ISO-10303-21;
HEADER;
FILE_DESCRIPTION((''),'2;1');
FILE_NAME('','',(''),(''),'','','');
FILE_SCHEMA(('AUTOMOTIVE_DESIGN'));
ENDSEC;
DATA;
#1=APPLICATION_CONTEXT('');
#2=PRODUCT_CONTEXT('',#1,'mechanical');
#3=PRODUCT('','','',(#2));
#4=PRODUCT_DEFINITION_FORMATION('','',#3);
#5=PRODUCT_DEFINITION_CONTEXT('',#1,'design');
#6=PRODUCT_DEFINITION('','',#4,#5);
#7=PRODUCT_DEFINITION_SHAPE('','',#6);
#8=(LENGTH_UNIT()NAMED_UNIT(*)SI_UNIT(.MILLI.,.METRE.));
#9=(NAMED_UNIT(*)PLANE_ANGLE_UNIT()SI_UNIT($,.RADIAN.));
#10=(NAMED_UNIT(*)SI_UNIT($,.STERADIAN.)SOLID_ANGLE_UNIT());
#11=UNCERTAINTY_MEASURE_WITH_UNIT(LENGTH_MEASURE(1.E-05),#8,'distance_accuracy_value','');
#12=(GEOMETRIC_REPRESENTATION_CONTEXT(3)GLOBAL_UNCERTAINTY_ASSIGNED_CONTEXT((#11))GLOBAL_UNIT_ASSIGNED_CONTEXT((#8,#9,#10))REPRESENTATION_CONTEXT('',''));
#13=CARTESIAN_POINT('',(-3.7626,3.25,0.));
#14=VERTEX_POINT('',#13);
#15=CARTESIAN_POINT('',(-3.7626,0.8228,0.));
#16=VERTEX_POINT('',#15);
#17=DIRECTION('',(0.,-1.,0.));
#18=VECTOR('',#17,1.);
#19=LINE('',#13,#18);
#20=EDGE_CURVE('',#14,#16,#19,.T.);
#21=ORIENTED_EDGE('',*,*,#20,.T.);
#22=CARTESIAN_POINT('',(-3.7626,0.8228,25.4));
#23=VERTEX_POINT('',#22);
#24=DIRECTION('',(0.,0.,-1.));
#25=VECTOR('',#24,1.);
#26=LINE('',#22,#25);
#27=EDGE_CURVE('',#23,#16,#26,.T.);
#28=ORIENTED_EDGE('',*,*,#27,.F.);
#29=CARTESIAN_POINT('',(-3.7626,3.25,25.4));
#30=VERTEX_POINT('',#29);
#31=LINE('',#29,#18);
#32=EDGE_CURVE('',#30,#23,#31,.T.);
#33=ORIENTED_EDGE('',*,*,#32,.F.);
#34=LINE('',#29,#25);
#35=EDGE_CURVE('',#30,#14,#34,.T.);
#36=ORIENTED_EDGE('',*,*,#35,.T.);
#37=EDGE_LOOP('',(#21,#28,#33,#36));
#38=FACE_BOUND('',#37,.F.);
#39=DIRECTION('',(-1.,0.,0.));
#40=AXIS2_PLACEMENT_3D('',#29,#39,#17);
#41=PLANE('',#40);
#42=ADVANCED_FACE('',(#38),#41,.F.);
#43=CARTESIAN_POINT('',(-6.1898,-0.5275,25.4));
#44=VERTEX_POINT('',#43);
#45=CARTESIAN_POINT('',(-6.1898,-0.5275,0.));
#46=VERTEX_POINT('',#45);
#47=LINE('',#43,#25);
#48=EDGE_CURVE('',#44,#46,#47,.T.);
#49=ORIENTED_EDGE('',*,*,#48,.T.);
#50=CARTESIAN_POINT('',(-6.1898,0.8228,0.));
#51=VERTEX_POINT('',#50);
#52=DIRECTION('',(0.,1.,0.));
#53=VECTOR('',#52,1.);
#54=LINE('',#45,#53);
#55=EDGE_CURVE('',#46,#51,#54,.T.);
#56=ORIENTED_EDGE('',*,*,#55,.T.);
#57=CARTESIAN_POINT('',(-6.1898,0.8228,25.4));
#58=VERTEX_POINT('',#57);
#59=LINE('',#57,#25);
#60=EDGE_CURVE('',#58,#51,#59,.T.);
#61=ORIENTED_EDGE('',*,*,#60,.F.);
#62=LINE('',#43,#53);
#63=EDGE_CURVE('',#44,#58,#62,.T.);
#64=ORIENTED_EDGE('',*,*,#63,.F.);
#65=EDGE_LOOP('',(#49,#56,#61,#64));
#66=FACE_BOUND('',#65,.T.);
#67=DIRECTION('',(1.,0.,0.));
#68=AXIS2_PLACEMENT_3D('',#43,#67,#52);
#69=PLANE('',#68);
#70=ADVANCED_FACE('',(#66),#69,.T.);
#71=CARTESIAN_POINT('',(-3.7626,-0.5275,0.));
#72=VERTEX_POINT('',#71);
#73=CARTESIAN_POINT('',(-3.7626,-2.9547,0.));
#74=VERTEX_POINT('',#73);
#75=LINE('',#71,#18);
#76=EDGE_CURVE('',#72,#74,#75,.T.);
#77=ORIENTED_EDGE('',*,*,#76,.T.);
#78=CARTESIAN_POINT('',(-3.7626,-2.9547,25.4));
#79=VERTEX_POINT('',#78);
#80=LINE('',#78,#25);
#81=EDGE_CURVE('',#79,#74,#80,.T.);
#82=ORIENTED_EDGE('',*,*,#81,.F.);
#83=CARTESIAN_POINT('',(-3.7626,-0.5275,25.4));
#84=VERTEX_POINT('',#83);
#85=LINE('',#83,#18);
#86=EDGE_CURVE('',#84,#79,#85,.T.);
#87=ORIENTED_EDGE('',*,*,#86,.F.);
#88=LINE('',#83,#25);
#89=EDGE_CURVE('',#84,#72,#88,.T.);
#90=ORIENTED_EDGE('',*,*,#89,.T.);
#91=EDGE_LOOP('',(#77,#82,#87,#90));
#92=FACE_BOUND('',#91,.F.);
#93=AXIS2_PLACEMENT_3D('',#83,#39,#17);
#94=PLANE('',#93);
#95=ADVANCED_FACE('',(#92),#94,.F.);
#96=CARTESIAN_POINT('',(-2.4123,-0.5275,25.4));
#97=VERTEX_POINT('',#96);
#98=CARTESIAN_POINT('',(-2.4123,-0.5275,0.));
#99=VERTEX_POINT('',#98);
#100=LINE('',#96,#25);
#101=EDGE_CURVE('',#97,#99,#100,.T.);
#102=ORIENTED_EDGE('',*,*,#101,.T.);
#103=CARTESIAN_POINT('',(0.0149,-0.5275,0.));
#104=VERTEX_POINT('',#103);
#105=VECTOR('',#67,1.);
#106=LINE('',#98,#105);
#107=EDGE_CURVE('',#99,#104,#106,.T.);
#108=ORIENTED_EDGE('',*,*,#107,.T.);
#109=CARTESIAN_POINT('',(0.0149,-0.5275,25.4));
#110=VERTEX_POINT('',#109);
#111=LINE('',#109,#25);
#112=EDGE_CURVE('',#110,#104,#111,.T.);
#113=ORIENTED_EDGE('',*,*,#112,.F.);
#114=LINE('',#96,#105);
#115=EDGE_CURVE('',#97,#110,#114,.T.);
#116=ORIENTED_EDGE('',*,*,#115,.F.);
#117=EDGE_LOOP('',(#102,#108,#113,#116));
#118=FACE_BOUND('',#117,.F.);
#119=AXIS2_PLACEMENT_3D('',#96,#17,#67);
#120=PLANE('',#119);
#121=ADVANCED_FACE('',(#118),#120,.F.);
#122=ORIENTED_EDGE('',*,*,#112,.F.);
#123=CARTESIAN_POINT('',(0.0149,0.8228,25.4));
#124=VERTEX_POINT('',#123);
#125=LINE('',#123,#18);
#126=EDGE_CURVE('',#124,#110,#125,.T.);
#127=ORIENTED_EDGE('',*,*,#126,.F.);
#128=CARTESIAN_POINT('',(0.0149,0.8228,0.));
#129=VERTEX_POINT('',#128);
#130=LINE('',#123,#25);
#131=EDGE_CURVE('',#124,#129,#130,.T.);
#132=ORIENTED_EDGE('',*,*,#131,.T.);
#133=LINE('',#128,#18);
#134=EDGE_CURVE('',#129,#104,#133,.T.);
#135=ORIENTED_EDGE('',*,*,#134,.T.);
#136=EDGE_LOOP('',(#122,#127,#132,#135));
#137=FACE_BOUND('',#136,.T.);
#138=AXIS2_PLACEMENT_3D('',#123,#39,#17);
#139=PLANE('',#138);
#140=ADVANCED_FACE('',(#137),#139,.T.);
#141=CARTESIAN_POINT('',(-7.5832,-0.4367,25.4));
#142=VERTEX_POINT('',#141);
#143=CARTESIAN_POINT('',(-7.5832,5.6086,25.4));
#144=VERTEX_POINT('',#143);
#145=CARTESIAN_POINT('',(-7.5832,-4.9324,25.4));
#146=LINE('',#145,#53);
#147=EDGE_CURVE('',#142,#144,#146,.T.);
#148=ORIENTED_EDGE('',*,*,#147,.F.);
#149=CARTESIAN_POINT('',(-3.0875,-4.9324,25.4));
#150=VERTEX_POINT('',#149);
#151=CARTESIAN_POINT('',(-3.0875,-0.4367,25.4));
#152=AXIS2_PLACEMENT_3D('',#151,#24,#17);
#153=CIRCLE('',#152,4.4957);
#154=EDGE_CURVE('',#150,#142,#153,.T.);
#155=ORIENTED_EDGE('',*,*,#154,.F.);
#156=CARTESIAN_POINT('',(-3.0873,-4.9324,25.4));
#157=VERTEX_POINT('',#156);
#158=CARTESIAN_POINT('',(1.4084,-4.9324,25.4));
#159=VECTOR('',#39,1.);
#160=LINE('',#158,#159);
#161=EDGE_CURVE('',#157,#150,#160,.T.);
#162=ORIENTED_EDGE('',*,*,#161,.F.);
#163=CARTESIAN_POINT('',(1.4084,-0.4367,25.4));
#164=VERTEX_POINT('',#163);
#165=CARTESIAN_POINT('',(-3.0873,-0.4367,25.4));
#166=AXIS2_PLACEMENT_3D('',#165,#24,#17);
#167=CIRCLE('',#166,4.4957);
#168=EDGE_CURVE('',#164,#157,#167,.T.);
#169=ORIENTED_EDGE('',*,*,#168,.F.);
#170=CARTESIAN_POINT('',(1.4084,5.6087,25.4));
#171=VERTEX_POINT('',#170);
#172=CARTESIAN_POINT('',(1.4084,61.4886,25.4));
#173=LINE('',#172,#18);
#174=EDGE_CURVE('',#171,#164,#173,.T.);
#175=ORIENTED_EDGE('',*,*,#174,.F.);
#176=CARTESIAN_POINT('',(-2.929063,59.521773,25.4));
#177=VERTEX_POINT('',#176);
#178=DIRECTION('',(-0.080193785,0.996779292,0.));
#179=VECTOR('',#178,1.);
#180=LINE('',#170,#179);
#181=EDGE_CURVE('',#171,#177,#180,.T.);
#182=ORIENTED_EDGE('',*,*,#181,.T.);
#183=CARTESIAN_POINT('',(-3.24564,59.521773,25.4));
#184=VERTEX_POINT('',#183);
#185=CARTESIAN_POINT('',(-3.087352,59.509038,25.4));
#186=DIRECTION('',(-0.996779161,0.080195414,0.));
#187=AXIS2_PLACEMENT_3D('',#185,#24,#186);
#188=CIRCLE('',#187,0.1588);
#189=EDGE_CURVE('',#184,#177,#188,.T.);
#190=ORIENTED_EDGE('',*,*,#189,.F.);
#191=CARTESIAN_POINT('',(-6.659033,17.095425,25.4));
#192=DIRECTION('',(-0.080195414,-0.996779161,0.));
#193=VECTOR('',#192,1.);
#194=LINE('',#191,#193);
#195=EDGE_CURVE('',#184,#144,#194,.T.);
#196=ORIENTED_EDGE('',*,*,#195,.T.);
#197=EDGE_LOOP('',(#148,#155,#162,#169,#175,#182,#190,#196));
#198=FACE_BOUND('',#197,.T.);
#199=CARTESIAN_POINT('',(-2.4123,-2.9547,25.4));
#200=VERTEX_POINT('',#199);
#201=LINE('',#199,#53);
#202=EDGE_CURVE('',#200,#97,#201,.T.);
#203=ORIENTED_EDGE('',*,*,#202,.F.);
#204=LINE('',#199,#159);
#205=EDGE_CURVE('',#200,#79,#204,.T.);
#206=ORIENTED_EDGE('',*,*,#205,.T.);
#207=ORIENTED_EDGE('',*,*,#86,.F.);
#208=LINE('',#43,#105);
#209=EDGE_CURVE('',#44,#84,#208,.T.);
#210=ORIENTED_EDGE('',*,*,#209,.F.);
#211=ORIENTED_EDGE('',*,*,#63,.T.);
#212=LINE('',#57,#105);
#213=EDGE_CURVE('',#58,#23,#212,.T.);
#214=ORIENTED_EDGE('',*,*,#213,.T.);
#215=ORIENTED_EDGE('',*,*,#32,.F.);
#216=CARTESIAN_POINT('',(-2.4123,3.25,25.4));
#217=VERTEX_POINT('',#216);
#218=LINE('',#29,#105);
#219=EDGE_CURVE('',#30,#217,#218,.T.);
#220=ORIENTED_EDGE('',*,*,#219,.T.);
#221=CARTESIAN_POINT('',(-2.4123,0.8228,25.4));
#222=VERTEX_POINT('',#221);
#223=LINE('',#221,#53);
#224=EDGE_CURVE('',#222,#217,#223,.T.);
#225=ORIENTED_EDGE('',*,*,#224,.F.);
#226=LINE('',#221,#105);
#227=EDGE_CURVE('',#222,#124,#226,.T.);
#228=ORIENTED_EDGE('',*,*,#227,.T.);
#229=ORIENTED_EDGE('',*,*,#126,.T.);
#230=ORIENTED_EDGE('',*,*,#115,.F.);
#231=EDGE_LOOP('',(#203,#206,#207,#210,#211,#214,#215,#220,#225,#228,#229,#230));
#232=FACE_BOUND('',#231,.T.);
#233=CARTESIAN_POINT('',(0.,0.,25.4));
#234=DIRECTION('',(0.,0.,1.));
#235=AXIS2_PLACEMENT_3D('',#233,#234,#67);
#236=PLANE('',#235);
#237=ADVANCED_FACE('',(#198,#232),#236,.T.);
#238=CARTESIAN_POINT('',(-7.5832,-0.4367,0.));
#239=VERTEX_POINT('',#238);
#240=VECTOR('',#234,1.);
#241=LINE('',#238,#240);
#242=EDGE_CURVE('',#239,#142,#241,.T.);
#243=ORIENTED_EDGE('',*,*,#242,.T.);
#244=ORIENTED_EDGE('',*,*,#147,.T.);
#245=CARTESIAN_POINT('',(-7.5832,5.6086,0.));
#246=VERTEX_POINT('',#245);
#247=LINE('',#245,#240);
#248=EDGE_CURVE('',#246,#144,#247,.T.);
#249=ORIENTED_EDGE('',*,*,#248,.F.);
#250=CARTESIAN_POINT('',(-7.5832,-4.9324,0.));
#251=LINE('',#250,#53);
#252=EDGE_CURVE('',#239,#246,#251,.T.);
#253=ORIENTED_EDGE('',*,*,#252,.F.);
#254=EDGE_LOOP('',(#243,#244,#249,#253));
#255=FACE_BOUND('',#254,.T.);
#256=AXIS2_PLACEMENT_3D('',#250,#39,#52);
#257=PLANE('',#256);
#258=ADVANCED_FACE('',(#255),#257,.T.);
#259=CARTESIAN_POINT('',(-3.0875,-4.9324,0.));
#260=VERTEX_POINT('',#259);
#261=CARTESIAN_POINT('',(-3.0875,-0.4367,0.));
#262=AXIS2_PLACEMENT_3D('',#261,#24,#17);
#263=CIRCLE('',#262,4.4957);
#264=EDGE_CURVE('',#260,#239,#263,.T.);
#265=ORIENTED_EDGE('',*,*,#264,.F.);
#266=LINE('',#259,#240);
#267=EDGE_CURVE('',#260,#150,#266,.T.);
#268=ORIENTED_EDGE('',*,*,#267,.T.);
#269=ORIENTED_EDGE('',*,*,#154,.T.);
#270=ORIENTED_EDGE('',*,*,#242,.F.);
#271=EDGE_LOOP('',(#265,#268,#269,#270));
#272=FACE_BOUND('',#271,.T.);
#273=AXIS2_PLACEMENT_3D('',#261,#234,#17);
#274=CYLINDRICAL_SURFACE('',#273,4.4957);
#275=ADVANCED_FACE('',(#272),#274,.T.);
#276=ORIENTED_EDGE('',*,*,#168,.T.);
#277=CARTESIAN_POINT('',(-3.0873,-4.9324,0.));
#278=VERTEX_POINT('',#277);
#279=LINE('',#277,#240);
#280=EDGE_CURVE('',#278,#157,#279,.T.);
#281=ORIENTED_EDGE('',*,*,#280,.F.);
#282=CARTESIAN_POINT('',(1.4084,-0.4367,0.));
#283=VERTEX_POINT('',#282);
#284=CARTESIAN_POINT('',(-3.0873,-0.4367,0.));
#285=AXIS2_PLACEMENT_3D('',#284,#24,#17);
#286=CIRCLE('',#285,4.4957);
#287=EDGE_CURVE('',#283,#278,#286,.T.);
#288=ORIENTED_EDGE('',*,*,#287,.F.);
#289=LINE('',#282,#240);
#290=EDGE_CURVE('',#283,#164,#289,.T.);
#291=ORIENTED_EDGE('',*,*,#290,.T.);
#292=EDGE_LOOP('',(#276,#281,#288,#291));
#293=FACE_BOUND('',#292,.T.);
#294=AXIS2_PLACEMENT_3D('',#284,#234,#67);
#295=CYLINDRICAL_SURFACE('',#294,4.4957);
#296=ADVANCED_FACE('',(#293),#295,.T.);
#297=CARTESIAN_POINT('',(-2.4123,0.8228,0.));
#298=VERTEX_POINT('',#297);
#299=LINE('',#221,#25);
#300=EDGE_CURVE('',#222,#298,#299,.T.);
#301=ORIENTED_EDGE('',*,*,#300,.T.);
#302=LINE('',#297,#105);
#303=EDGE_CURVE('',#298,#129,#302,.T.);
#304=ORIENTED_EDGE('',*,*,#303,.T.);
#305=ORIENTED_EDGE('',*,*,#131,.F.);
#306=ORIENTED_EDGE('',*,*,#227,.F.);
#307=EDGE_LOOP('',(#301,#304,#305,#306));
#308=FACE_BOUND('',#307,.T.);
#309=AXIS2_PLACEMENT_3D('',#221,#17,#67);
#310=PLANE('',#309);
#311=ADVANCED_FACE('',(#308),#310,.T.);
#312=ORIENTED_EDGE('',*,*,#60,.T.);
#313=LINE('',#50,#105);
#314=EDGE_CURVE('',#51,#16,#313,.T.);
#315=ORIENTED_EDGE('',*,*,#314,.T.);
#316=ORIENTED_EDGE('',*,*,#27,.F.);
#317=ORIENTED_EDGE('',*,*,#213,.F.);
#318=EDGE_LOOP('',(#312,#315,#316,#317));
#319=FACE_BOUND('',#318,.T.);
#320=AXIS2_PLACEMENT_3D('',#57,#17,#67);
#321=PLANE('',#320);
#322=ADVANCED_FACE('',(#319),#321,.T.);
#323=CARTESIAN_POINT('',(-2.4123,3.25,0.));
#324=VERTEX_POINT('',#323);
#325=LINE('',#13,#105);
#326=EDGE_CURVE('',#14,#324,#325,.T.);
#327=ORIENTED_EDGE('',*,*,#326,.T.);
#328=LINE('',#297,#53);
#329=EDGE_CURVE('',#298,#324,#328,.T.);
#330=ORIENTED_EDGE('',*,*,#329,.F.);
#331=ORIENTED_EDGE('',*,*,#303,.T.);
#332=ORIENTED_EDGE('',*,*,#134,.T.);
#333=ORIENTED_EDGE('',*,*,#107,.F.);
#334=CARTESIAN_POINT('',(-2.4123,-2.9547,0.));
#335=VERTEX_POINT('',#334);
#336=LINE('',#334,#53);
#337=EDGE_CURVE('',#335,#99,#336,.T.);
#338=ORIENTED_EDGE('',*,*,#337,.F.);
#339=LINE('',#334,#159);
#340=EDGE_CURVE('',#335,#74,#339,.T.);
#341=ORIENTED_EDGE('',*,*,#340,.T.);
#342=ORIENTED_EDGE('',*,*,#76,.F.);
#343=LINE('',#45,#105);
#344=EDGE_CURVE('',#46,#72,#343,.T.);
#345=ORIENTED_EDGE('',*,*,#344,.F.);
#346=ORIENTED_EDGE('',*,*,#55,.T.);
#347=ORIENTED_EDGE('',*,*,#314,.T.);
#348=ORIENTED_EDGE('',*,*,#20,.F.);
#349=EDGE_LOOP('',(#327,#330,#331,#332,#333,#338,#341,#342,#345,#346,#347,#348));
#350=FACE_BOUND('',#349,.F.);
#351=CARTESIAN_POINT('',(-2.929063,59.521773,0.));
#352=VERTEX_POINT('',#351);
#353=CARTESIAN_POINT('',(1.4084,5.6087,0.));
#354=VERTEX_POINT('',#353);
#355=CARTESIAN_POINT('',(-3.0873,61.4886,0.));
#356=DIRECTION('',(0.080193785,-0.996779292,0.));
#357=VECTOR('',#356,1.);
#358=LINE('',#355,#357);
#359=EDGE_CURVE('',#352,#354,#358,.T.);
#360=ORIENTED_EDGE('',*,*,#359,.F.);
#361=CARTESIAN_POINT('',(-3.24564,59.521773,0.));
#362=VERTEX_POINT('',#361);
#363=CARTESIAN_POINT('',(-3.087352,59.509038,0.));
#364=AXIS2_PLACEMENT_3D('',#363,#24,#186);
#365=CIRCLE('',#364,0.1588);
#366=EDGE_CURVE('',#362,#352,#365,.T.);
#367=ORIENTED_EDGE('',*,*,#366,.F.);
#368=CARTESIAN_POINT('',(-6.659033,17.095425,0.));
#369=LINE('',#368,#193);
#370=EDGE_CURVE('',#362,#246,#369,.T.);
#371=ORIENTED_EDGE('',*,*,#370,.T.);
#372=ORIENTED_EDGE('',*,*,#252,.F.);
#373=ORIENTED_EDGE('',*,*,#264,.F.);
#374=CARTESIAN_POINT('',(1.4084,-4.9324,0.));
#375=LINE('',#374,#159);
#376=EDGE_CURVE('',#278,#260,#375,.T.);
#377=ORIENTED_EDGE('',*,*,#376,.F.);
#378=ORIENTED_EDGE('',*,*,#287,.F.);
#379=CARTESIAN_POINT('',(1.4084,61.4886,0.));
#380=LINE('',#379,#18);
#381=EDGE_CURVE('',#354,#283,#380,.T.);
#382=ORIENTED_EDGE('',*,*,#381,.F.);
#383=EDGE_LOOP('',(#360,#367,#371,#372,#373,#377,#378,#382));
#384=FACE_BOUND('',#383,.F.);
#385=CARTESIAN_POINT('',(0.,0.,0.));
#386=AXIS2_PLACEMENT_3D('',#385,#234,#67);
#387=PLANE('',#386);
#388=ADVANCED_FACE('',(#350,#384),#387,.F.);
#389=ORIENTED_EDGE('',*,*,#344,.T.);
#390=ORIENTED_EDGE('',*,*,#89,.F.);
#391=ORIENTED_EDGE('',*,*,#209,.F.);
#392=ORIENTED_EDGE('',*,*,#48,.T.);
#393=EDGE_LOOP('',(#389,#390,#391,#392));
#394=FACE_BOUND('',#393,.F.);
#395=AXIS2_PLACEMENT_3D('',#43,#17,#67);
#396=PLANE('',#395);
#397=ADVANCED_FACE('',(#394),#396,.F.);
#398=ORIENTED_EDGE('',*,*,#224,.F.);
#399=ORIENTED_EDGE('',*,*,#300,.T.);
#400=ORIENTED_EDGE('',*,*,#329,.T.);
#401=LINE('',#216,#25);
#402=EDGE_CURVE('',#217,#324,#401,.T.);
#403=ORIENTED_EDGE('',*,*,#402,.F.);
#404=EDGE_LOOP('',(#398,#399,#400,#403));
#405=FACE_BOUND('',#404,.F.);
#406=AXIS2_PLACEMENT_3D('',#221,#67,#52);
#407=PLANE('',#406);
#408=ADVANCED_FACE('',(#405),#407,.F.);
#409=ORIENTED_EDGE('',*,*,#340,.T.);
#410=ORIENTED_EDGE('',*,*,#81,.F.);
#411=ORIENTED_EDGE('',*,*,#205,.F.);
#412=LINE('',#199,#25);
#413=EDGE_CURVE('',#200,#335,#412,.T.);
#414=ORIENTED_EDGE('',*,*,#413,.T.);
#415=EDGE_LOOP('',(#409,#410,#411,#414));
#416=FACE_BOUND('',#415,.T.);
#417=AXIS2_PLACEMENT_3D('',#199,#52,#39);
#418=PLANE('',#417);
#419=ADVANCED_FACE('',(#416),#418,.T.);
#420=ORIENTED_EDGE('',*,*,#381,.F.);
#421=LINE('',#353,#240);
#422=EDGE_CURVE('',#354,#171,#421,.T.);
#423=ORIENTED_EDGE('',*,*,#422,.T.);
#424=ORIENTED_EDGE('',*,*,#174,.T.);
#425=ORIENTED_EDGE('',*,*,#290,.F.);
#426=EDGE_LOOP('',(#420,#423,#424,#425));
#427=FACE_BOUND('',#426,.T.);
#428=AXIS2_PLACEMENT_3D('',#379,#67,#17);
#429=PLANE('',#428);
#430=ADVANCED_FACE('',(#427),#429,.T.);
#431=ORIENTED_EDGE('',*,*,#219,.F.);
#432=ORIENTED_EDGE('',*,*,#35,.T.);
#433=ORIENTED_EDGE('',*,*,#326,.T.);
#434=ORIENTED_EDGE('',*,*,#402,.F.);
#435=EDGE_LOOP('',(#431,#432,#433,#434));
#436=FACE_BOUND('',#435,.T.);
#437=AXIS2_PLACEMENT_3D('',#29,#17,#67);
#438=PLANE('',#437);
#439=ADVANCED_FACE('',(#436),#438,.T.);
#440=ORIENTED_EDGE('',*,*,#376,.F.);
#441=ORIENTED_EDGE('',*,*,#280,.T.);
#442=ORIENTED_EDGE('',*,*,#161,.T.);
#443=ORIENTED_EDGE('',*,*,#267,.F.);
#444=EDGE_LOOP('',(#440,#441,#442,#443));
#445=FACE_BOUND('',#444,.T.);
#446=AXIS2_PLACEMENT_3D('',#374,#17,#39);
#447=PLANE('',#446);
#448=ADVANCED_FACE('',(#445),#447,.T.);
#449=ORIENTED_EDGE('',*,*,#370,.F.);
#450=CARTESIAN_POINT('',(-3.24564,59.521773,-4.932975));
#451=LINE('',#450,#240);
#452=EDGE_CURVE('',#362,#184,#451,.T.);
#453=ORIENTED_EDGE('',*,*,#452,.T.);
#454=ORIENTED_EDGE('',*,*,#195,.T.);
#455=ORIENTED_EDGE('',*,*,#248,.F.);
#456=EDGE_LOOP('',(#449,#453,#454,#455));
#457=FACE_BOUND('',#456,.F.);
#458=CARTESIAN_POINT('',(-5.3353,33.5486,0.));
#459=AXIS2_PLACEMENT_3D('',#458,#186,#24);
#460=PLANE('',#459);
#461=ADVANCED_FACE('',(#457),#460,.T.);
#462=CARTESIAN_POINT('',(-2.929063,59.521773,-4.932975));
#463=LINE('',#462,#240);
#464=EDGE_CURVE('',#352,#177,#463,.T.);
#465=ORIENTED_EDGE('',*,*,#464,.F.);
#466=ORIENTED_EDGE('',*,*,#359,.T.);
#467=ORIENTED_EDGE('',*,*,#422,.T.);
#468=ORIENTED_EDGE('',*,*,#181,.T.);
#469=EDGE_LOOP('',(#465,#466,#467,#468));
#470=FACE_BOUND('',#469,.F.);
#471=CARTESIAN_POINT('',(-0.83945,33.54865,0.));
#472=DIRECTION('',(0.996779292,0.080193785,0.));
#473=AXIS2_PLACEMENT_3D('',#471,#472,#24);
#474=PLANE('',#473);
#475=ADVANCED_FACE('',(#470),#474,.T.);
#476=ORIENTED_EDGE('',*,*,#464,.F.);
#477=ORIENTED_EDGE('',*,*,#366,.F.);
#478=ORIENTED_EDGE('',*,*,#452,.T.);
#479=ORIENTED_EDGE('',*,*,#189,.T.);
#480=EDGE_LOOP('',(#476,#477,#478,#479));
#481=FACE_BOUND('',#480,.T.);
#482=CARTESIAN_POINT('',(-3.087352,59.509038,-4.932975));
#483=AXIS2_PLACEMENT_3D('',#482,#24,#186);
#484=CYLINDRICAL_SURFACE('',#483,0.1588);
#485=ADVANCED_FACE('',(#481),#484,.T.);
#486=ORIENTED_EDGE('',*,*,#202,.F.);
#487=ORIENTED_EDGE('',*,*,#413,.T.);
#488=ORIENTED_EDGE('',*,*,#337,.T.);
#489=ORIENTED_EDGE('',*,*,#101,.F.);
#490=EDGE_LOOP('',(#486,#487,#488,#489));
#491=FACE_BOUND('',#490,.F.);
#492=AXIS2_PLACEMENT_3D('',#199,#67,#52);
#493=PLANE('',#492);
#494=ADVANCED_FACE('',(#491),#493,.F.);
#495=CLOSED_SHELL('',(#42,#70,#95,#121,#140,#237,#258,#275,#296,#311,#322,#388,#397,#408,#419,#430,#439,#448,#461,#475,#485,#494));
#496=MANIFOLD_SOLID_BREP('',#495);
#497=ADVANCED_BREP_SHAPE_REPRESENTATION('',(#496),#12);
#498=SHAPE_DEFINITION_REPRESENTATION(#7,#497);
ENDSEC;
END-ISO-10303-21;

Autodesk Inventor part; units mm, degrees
ref_plane "YZ Plane" through (0, 0, 0) normal (1, 0, 0) x (0, 1, 0)
ref_plane "XZ Plane" through (0, 0, 0) normal (0, 1, 0) x (-1, 0, 0)
ref_plane "XY Plane" through (0, 0, 0) normal (0, 0, 1) x (1, 0, 0)
sketch "Sketch1" plane through (0, 0, 0) normal (0, 0, 1) x (1, 0, 0)
  line L0 (-7.5832, 61.4886) -> (1.4084, 61.4886)
  line L1 (1.4084, 61.4886) -> (1.4084, -4.9324)
  line L2 (1.4084, -4.9324) -> (-7.5832, -4.9324)
  line L3 (-7.5832, -4.9324) -> (-7.5832, 61.4886)
  point P0 (0, 0)
  dimension "d0" = 8.9916
  dimension "d1" = 66.421
extrude "Extrusion1" add sketch "Sketch1" along normal blind 25.4
sketch "Sketch2" plane through (0, 0, 25.4) normal (0, 0, 1) x (1, 0, 0)
  line L0 (-7.5832, -4.9324) -> (1.4084, -4.9324) projected
  line L1 (-3.0874, -4.9324) -> (-3.0874, 0.1476) construction
  circle A0 centre (-3.0874, 0.1476) radius 3.175 construction
  line L2 (-3.0874, 0.1476) -> (-3.7626, 3.25) construction
  line L3 (-3.0874, 0.1476) -> (-2.4123, 3.25) construction
  line L4 (-3.7626, 3.25) -> (-2.4123, 3.25)
  line L5 (-3.0874, 0.1476) -> (-6.1898, -0.5275) construction
  line L6 (-6.1898, -0.5275) -> (-6.1898, 0.8228)
  line L7 (-3.0874, 0.1476) -> (-2.4123, -2.9547) construction
  line L8 (-2.4123, -2.9547) -> (-3.7626, -2.9547)
  line L9 (-3.0874, 0.1476) -> (0.0149, 0.8228) construction
  line L10 (0.0149, 0.8228) -> (0.0149, -0.5275)
  line L11 (-3.7626, 3.25) -> (-3.7626, 0.8228)
  line L12 (-3.7626, -0.5275) -> (-3.7626, -2.9547)
  line L13 (-6.1898, -0.5275) -> (-3.7626, -0.5275)
  line L14 (-2.4123, -0.5275) -> (0.0149, -0.5275)
  line L15 (-2.4123, -2.9547) -> (-2.4123, -0.5275)
  line L16 (-2.4123, 0.8228) -> (-2.4123, 3.25)
  line L17 (-2.4123, 0.8228) -> (0.0149, 0.8228)
  line L18 (-6.1898, 0.8228) -> (-3.7626, 0.8228)
  point P0 (0, 0)
  dimension "d4" = 5.08
  dimension "d5" = 6.35
  dimension "d18" = 360
fillet "Fillet1" radius 4.4958 2 edges at (1.4084, -4.9324, 12.7) (-7.5832, -4.9324, 12.7)
chamfer "Chamfer1" distance 4.4958 distance2 55.88 1 edges at (-7.5832, 61.4886, 12.7) measured on face at (-1.5888, 61.4886, 8.4667)
chamfer "Chamfer2" distance 55.88 distance2 4.4958 1 edges at (1.4084, 61.4886, 12.7) measured on face at (1.4084, 20.2051, 8.4667)
sketch "Sketch3" plane through (0, 0, 25.4) normal (0, 0, 1) x (1, 0, 0)
  point P0 (0, 0)
fillet "Fillet2" radius 0.1588 2 edges at (-3.0873, 61.4886, 12.7) (-3.0874, 61.4886, 12.7)
extrude "Extrusion3" cut sketch "Sketch2" against normal blind 25.4
sketch "Sketch4" plane through (0, 0, 25.4) normal (0, 0, 1) x (1, 0, 0)
  line L0 (-6.1898, 0.8228) -> (-6.1898, -0.5275) projected
  line L1 (-6.1898, 0.1476) -> (-2.5733, 0.1476) construction
  circle A0 centre (-3.0874, 0.1476) radius 0.9548
  point P0 (0, 0)
properties part number "Bistable Flipper"
